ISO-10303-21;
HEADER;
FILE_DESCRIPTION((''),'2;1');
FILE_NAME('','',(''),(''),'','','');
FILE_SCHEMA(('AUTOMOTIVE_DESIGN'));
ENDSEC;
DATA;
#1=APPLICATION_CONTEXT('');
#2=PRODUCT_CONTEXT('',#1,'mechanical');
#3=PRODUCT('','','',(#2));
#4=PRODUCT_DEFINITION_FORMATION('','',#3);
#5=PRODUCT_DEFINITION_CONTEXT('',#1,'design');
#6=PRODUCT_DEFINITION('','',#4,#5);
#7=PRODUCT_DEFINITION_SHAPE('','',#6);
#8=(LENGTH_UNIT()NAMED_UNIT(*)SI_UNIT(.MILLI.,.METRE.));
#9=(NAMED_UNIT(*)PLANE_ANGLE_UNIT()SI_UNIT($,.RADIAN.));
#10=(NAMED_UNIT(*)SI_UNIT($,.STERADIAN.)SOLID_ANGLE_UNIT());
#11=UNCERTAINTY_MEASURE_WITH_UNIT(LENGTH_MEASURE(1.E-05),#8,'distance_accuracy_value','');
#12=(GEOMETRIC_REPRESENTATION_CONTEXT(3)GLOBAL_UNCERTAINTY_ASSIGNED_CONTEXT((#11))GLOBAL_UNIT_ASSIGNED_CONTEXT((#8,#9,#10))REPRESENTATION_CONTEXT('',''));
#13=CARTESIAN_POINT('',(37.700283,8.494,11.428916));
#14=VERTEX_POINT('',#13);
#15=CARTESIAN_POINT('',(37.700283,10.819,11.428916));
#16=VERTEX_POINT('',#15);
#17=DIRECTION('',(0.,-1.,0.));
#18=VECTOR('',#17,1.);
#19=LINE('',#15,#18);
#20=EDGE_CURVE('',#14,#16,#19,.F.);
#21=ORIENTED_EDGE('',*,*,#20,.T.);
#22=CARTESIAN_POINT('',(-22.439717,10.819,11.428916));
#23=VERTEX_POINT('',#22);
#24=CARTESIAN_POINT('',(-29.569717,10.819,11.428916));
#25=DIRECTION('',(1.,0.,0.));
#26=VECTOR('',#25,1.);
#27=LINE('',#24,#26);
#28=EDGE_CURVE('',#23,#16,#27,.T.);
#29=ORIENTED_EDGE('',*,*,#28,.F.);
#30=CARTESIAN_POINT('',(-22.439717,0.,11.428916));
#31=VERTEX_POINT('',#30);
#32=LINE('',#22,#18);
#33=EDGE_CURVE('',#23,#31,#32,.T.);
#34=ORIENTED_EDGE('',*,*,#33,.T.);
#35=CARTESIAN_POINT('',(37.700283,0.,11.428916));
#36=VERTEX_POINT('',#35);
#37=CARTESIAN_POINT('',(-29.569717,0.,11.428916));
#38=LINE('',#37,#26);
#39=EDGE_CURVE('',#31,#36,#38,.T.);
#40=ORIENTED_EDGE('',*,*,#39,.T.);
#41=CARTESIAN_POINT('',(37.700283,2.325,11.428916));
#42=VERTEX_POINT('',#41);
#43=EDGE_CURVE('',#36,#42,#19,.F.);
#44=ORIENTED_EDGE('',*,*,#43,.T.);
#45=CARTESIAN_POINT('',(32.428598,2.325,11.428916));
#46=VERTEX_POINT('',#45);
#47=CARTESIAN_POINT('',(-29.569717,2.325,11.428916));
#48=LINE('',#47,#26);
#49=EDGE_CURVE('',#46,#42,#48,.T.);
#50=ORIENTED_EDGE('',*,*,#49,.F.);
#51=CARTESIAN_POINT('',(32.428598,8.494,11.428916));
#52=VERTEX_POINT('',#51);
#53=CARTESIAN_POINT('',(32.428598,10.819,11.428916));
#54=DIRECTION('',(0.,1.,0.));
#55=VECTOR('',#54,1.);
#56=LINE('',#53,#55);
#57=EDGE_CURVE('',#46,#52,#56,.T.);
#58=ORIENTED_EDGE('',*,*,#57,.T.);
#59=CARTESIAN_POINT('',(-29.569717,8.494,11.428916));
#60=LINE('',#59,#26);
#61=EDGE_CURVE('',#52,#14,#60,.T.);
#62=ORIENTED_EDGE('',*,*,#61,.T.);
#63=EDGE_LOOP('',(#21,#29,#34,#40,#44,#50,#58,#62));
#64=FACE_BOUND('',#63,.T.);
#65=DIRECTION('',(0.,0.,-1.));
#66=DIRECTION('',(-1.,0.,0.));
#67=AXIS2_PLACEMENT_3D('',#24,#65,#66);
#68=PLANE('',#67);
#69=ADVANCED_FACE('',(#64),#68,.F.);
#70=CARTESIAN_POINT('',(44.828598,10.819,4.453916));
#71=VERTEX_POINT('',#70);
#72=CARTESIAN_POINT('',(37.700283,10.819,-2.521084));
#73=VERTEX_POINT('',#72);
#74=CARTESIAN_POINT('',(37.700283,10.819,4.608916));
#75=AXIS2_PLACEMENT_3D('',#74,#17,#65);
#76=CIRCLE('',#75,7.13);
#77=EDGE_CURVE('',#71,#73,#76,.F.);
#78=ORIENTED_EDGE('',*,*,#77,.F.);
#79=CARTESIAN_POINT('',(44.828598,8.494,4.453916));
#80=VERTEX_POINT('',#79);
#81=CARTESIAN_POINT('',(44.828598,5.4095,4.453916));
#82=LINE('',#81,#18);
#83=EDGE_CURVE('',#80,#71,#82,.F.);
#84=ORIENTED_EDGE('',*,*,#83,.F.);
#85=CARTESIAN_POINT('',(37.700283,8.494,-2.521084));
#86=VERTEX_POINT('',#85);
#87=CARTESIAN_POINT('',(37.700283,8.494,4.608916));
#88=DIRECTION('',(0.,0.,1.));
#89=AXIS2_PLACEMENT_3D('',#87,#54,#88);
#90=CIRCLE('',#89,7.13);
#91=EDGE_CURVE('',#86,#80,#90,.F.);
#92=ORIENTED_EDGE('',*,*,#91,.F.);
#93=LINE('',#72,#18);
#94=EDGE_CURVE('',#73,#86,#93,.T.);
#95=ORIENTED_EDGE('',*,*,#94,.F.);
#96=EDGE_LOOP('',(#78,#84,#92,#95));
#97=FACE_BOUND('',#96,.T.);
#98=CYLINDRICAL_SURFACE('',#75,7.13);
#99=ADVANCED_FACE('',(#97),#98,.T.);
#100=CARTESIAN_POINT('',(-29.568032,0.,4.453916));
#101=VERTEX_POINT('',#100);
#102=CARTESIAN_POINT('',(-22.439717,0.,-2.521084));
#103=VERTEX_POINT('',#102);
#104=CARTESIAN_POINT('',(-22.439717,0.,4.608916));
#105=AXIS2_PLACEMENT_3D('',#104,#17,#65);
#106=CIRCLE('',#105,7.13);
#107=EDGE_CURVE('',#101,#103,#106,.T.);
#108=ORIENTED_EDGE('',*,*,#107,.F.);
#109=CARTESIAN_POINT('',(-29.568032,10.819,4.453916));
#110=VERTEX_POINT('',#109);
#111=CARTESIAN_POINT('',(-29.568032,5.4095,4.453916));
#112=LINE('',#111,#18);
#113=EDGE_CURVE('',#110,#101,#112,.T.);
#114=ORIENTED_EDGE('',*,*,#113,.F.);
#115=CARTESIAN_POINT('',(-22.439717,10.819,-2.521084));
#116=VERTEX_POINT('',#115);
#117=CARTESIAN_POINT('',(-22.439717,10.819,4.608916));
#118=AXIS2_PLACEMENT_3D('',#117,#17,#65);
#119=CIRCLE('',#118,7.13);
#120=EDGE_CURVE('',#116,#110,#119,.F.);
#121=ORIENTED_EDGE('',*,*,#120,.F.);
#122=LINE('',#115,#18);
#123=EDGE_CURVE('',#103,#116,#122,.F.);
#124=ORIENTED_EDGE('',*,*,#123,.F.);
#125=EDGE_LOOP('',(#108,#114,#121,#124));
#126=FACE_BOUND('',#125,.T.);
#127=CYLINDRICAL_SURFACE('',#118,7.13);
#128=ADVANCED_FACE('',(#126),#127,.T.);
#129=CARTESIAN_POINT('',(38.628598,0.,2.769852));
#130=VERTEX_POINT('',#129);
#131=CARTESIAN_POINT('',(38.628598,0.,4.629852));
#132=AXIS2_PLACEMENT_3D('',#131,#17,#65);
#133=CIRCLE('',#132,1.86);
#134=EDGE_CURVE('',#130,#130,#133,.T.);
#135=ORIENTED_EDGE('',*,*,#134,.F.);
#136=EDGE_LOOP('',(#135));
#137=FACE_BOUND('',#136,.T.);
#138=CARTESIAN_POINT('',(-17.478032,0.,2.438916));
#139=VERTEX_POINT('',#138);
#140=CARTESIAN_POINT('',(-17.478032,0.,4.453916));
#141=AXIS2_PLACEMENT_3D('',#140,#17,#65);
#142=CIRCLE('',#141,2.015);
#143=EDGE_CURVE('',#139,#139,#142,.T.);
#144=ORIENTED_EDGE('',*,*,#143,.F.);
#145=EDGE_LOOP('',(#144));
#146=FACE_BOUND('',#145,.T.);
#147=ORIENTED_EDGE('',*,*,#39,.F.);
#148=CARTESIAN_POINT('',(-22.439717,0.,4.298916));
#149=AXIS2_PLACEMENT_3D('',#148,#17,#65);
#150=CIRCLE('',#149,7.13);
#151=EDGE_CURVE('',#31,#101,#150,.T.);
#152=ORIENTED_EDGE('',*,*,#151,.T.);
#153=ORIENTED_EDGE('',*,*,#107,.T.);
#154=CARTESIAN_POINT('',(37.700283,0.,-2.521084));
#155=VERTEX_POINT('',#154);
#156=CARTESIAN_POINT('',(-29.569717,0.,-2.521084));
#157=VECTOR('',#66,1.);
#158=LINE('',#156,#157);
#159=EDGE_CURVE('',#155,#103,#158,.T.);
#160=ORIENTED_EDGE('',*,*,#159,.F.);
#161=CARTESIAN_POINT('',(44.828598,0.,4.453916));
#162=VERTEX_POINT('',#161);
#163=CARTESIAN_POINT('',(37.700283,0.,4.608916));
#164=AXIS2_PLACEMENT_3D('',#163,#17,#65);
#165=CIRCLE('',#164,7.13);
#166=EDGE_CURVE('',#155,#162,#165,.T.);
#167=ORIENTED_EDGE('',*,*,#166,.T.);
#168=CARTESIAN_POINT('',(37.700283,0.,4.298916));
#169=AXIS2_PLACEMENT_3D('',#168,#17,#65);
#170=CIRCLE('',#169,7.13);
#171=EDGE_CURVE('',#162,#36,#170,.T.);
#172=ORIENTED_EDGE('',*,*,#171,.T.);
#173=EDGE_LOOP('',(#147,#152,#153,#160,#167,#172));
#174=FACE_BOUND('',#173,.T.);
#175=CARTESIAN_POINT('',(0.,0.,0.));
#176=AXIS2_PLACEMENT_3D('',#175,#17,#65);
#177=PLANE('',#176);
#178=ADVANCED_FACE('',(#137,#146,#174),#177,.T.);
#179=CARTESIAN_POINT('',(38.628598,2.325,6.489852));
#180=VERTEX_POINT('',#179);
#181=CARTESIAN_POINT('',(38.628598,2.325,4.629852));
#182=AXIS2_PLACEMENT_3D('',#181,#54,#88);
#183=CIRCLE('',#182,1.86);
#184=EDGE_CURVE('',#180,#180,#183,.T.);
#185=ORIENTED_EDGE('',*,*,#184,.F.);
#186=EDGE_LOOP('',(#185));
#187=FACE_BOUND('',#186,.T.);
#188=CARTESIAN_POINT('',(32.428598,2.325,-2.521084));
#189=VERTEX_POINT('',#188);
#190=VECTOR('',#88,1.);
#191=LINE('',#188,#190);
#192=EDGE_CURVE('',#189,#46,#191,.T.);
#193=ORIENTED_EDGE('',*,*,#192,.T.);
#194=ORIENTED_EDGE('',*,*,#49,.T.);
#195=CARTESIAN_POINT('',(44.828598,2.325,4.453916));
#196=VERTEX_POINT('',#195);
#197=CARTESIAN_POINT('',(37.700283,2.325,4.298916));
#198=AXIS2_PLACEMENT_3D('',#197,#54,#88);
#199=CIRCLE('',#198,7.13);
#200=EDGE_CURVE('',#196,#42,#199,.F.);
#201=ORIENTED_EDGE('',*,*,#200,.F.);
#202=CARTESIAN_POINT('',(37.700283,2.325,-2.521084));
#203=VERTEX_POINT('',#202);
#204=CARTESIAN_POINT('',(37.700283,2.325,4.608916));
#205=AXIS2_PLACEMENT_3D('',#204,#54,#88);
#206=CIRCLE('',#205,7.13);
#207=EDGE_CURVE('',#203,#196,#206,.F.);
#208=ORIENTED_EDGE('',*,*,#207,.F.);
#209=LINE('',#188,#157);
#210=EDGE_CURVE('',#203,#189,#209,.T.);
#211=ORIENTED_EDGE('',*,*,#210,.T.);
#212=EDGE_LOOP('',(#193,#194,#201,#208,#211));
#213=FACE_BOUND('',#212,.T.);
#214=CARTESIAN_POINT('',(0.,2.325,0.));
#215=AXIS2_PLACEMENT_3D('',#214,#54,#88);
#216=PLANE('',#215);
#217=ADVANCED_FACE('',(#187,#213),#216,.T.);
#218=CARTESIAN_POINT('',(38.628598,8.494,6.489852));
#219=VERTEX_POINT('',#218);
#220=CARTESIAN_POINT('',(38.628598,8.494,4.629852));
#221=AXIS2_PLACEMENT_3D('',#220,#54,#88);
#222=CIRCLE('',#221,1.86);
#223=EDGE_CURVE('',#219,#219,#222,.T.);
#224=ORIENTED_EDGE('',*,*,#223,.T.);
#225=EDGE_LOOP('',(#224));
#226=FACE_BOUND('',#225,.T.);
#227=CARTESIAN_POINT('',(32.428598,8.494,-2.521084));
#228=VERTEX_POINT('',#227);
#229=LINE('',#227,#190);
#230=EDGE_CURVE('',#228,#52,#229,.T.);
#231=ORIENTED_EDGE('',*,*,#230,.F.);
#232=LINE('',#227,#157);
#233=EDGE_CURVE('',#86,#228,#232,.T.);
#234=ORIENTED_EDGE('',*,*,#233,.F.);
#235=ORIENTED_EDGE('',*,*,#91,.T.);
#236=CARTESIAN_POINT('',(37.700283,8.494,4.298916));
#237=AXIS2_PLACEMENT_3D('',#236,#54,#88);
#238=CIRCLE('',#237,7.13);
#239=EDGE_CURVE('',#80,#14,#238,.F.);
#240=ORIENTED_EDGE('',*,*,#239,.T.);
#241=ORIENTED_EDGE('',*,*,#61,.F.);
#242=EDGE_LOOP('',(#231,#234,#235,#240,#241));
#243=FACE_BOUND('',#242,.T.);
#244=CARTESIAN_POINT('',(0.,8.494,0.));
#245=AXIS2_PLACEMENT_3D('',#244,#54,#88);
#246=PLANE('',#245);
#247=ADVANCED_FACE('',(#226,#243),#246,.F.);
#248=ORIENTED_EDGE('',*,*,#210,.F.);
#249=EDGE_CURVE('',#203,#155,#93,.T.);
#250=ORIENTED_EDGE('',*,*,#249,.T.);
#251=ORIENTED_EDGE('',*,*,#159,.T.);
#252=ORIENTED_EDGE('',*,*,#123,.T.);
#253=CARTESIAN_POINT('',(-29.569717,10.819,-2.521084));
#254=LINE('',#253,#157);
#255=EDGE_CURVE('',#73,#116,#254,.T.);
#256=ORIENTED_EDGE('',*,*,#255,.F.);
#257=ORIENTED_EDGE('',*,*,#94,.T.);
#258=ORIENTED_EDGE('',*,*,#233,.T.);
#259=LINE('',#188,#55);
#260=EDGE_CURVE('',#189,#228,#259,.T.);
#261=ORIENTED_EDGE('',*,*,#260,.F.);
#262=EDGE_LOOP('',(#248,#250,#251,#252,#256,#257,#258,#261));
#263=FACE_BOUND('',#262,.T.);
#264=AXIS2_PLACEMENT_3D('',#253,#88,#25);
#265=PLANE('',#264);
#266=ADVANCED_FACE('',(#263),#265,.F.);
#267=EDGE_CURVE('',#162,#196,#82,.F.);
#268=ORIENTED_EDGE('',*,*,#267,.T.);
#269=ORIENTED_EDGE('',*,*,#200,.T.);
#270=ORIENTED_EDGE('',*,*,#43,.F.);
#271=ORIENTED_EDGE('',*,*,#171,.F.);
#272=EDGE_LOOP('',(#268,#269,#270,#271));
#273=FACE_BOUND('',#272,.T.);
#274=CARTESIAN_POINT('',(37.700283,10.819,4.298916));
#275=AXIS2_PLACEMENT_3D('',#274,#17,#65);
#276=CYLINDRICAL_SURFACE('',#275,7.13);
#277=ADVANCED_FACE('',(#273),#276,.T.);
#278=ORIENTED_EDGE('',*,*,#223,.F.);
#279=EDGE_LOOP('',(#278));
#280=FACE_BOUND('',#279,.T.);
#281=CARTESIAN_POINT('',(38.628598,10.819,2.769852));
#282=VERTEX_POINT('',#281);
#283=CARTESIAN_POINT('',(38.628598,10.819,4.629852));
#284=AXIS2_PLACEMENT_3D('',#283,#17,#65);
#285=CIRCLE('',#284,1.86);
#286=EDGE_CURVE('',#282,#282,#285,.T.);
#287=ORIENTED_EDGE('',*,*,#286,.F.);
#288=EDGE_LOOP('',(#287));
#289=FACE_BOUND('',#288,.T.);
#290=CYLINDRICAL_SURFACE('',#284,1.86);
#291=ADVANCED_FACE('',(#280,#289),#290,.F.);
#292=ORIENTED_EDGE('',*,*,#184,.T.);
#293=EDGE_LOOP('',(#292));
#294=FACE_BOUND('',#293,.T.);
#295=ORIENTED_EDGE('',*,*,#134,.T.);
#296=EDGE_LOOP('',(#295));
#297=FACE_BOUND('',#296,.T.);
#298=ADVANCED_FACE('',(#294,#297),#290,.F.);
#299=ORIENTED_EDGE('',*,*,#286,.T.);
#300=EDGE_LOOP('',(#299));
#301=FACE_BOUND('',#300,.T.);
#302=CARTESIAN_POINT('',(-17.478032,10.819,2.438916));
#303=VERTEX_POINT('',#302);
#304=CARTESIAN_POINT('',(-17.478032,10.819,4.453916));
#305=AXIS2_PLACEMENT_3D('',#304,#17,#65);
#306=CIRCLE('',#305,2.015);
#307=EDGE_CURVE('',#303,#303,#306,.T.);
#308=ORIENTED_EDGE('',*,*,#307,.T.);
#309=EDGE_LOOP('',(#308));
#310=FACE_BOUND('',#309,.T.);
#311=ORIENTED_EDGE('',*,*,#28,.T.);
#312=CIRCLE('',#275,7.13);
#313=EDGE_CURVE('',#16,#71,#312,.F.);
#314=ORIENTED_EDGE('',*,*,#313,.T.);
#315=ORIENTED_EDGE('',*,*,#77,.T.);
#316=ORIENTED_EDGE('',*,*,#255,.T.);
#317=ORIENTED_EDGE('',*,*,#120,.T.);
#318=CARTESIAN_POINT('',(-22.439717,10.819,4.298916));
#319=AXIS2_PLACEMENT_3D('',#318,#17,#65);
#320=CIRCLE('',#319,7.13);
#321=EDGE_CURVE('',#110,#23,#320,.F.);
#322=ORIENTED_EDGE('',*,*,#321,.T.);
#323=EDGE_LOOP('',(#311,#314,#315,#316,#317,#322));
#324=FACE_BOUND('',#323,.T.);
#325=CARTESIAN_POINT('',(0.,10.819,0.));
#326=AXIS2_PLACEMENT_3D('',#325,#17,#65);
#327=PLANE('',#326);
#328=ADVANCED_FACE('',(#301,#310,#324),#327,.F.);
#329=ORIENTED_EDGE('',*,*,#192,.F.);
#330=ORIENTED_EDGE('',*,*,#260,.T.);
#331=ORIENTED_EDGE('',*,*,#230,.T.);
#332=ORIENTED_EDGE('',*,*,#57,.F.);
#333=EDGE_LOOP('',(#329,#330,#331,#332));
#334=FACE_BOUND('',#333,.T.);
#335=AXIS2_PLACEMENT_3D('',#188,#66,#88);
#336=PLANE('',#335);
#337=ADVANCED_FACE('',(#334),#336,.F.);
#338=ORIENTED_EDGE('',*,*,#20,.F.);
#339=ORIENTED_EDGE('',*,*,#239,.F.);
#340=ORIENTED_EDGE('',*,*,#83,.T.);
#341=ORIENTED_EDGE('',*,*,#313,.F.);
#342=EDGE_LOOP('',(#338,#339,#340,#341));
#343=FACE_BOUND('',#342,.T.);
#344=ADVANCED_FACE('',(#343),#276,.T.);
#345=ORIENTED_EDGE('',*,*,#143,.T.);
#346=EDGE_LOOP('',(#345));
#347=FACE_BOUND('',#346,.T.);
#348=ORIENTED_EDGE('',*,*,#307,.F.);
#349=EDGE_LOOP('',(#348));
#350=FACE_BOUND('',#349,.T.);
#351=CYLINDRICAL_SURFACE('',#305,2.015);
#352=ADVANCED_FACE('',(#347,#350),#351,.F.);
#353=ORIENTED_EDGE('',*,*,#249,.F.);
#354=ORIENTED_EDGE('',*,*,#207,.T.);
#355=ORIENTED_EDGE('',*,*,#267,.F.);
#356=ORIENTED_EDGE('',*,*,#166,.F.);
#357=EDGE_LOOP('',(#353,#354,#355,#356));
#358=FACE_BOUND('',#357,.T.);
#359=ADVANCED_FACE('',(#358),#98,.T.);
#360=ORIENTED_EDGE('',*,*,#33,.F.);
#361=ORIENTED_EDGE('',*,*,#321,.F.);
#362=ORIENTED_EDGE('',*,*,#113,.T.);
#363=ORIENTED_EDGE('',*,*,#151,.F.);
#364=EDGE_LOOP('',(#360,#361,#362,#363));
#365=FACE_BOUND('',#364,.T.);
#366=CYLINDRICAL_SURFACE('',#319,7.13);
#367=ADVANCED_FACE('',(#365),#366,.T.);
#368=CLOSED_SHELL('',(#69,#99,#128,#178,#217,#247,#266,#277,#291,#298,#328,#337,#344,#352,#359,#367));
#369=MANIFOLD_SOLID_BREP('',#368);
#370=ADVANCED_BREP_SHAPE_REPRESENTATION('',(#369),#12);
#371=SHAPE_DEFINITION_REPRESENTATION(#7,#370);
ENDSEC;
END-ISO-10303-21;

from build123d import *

# Parameters (mm, degrees)
SKETCH1_W           = 240
SKETCH1_H           = 45
BOSS_EXTRUDE1_DEPTH = 34.9
FILLET1_R           = 23
CUT_EXTRUDE1_START  = -7.5
SKETCH2_W           = 49.564850137
SKETCH2_H           = 45.01227926
CUT_EXTRUDE1_DEPTH  = 19.9
SKETCH3_R           = 6
CUT_EXTRUDE2_DEPTH  = 154.260575491
SKETCH4_R           = 6.5
CUT_EXTRUDE3_DEPTH  = 154.260575491
SCALE1_SCALE        = 0.31


with BuildPart() as part:
    # Sketch1 → Boss-Extrude1 (new body)
    with BuildSketch(Plane(origin=(0, 0, 0), x_dir=(1, 0, 0), z_dir=(0, 1, 0))):
        with Locations((24.613815765, -14.36746988)):
            Rectangle(SKETCH1_W, SKETCH1_H)
    extrude(amount=BOSS_EXTRUDE1_DEPTH)

    # Fillet1
    # the kernel refuses this fillet: 23 mm, written as the material it takes off along each edge
    with BuildSketch(Plane(origin=(-95.386184235, -57.5, 36.86746988), x_dir=(1, 0, 0), z_dir=(0, 1, 0))) as fillet1_piece_1:
        with BuildLine():
            CenterArc((FILLET1_R, FILLET1_R), FILLET1_R, 180, 90)
            Line((0, FILLET1_R), (0, 0))
            Line((0, 0), (FILLET1_R, 0))
        make_face()
    extrude(amount=149.9, mode=Mode.SUBTRACT)
    with BuildSketch(Plane(origin=(-95.386184235, -57.5, -8.13253012), x_dir=(1, 0, 0), z_dir=(0, 1, 0)), Plane(origin=(144.613815765, -57.5, 36.86746988), x_dir=(-1, 0, 0), z_dir=(0, 1, 0)), Plane(origin=(144.613815765, -57.5, -8.13253012), x_dir=(0, 0, 1), z_dir=(0, 1, 0))) as fillet1_piece_2:
        with BuildLine():
            CenterArc((FILLET1_R, -FILLET1_R), FILLET1_R, 90, 90)
            Line((0, -FILLET1_R), (0, 0))
            Line((0, 0), (FILLET1_R, 0))
        make_face()
    extrude(amount=149.9, mode=Mode.SUBTRACT)

    # Sketch2 → Cut-Extrude1 (cut)
    with BuildSketch(Plane(origin=(0, 34.9, 0), x_dir=(1, 0, 0), z_dir=(0, 1, 0)).offset(CUT_EXTRUDE1_START)):
        with Locations((129.390805409, -14.37360951)):
            Rectangle(SKETCH2_W, SKETCH2_H)
    extrude(amount=-CUT_EXTRUDE1_DEPTH, mode=Mode.SUBTRACT)

    # Sketch3 → Cut-Extrude2 (cut, through all)
    with BuildSketch(Plane.XZ):
        with Locations(Location((124.60838034, 14.935006331, 0), (0, 0, 270))):
            Circle(SKETCH3_R)
    extrude(amount=-CUT_EXTRUDE2_DEPTH, mode=Mode.SUBTRACT)

    # Sketch4 → Cut-Extrude3 (cut, through all)
    with BuildSketch(Plane.XZ):
        with Locations(Location((-56.380748811, 14.36746988, 0), (0, 0, 270))):
            Circle(SKETCH4_R)
    extrude(amount=-CUT_EXTRUDE3_DEPTH, mode=Mode.SUBTRACT)


with BuildPart() as part_1:
    # Scale1: scaled about (0, 0, 0)
    add(part.part.scale(SCALE1_SCALE))


solid = part_1.part
